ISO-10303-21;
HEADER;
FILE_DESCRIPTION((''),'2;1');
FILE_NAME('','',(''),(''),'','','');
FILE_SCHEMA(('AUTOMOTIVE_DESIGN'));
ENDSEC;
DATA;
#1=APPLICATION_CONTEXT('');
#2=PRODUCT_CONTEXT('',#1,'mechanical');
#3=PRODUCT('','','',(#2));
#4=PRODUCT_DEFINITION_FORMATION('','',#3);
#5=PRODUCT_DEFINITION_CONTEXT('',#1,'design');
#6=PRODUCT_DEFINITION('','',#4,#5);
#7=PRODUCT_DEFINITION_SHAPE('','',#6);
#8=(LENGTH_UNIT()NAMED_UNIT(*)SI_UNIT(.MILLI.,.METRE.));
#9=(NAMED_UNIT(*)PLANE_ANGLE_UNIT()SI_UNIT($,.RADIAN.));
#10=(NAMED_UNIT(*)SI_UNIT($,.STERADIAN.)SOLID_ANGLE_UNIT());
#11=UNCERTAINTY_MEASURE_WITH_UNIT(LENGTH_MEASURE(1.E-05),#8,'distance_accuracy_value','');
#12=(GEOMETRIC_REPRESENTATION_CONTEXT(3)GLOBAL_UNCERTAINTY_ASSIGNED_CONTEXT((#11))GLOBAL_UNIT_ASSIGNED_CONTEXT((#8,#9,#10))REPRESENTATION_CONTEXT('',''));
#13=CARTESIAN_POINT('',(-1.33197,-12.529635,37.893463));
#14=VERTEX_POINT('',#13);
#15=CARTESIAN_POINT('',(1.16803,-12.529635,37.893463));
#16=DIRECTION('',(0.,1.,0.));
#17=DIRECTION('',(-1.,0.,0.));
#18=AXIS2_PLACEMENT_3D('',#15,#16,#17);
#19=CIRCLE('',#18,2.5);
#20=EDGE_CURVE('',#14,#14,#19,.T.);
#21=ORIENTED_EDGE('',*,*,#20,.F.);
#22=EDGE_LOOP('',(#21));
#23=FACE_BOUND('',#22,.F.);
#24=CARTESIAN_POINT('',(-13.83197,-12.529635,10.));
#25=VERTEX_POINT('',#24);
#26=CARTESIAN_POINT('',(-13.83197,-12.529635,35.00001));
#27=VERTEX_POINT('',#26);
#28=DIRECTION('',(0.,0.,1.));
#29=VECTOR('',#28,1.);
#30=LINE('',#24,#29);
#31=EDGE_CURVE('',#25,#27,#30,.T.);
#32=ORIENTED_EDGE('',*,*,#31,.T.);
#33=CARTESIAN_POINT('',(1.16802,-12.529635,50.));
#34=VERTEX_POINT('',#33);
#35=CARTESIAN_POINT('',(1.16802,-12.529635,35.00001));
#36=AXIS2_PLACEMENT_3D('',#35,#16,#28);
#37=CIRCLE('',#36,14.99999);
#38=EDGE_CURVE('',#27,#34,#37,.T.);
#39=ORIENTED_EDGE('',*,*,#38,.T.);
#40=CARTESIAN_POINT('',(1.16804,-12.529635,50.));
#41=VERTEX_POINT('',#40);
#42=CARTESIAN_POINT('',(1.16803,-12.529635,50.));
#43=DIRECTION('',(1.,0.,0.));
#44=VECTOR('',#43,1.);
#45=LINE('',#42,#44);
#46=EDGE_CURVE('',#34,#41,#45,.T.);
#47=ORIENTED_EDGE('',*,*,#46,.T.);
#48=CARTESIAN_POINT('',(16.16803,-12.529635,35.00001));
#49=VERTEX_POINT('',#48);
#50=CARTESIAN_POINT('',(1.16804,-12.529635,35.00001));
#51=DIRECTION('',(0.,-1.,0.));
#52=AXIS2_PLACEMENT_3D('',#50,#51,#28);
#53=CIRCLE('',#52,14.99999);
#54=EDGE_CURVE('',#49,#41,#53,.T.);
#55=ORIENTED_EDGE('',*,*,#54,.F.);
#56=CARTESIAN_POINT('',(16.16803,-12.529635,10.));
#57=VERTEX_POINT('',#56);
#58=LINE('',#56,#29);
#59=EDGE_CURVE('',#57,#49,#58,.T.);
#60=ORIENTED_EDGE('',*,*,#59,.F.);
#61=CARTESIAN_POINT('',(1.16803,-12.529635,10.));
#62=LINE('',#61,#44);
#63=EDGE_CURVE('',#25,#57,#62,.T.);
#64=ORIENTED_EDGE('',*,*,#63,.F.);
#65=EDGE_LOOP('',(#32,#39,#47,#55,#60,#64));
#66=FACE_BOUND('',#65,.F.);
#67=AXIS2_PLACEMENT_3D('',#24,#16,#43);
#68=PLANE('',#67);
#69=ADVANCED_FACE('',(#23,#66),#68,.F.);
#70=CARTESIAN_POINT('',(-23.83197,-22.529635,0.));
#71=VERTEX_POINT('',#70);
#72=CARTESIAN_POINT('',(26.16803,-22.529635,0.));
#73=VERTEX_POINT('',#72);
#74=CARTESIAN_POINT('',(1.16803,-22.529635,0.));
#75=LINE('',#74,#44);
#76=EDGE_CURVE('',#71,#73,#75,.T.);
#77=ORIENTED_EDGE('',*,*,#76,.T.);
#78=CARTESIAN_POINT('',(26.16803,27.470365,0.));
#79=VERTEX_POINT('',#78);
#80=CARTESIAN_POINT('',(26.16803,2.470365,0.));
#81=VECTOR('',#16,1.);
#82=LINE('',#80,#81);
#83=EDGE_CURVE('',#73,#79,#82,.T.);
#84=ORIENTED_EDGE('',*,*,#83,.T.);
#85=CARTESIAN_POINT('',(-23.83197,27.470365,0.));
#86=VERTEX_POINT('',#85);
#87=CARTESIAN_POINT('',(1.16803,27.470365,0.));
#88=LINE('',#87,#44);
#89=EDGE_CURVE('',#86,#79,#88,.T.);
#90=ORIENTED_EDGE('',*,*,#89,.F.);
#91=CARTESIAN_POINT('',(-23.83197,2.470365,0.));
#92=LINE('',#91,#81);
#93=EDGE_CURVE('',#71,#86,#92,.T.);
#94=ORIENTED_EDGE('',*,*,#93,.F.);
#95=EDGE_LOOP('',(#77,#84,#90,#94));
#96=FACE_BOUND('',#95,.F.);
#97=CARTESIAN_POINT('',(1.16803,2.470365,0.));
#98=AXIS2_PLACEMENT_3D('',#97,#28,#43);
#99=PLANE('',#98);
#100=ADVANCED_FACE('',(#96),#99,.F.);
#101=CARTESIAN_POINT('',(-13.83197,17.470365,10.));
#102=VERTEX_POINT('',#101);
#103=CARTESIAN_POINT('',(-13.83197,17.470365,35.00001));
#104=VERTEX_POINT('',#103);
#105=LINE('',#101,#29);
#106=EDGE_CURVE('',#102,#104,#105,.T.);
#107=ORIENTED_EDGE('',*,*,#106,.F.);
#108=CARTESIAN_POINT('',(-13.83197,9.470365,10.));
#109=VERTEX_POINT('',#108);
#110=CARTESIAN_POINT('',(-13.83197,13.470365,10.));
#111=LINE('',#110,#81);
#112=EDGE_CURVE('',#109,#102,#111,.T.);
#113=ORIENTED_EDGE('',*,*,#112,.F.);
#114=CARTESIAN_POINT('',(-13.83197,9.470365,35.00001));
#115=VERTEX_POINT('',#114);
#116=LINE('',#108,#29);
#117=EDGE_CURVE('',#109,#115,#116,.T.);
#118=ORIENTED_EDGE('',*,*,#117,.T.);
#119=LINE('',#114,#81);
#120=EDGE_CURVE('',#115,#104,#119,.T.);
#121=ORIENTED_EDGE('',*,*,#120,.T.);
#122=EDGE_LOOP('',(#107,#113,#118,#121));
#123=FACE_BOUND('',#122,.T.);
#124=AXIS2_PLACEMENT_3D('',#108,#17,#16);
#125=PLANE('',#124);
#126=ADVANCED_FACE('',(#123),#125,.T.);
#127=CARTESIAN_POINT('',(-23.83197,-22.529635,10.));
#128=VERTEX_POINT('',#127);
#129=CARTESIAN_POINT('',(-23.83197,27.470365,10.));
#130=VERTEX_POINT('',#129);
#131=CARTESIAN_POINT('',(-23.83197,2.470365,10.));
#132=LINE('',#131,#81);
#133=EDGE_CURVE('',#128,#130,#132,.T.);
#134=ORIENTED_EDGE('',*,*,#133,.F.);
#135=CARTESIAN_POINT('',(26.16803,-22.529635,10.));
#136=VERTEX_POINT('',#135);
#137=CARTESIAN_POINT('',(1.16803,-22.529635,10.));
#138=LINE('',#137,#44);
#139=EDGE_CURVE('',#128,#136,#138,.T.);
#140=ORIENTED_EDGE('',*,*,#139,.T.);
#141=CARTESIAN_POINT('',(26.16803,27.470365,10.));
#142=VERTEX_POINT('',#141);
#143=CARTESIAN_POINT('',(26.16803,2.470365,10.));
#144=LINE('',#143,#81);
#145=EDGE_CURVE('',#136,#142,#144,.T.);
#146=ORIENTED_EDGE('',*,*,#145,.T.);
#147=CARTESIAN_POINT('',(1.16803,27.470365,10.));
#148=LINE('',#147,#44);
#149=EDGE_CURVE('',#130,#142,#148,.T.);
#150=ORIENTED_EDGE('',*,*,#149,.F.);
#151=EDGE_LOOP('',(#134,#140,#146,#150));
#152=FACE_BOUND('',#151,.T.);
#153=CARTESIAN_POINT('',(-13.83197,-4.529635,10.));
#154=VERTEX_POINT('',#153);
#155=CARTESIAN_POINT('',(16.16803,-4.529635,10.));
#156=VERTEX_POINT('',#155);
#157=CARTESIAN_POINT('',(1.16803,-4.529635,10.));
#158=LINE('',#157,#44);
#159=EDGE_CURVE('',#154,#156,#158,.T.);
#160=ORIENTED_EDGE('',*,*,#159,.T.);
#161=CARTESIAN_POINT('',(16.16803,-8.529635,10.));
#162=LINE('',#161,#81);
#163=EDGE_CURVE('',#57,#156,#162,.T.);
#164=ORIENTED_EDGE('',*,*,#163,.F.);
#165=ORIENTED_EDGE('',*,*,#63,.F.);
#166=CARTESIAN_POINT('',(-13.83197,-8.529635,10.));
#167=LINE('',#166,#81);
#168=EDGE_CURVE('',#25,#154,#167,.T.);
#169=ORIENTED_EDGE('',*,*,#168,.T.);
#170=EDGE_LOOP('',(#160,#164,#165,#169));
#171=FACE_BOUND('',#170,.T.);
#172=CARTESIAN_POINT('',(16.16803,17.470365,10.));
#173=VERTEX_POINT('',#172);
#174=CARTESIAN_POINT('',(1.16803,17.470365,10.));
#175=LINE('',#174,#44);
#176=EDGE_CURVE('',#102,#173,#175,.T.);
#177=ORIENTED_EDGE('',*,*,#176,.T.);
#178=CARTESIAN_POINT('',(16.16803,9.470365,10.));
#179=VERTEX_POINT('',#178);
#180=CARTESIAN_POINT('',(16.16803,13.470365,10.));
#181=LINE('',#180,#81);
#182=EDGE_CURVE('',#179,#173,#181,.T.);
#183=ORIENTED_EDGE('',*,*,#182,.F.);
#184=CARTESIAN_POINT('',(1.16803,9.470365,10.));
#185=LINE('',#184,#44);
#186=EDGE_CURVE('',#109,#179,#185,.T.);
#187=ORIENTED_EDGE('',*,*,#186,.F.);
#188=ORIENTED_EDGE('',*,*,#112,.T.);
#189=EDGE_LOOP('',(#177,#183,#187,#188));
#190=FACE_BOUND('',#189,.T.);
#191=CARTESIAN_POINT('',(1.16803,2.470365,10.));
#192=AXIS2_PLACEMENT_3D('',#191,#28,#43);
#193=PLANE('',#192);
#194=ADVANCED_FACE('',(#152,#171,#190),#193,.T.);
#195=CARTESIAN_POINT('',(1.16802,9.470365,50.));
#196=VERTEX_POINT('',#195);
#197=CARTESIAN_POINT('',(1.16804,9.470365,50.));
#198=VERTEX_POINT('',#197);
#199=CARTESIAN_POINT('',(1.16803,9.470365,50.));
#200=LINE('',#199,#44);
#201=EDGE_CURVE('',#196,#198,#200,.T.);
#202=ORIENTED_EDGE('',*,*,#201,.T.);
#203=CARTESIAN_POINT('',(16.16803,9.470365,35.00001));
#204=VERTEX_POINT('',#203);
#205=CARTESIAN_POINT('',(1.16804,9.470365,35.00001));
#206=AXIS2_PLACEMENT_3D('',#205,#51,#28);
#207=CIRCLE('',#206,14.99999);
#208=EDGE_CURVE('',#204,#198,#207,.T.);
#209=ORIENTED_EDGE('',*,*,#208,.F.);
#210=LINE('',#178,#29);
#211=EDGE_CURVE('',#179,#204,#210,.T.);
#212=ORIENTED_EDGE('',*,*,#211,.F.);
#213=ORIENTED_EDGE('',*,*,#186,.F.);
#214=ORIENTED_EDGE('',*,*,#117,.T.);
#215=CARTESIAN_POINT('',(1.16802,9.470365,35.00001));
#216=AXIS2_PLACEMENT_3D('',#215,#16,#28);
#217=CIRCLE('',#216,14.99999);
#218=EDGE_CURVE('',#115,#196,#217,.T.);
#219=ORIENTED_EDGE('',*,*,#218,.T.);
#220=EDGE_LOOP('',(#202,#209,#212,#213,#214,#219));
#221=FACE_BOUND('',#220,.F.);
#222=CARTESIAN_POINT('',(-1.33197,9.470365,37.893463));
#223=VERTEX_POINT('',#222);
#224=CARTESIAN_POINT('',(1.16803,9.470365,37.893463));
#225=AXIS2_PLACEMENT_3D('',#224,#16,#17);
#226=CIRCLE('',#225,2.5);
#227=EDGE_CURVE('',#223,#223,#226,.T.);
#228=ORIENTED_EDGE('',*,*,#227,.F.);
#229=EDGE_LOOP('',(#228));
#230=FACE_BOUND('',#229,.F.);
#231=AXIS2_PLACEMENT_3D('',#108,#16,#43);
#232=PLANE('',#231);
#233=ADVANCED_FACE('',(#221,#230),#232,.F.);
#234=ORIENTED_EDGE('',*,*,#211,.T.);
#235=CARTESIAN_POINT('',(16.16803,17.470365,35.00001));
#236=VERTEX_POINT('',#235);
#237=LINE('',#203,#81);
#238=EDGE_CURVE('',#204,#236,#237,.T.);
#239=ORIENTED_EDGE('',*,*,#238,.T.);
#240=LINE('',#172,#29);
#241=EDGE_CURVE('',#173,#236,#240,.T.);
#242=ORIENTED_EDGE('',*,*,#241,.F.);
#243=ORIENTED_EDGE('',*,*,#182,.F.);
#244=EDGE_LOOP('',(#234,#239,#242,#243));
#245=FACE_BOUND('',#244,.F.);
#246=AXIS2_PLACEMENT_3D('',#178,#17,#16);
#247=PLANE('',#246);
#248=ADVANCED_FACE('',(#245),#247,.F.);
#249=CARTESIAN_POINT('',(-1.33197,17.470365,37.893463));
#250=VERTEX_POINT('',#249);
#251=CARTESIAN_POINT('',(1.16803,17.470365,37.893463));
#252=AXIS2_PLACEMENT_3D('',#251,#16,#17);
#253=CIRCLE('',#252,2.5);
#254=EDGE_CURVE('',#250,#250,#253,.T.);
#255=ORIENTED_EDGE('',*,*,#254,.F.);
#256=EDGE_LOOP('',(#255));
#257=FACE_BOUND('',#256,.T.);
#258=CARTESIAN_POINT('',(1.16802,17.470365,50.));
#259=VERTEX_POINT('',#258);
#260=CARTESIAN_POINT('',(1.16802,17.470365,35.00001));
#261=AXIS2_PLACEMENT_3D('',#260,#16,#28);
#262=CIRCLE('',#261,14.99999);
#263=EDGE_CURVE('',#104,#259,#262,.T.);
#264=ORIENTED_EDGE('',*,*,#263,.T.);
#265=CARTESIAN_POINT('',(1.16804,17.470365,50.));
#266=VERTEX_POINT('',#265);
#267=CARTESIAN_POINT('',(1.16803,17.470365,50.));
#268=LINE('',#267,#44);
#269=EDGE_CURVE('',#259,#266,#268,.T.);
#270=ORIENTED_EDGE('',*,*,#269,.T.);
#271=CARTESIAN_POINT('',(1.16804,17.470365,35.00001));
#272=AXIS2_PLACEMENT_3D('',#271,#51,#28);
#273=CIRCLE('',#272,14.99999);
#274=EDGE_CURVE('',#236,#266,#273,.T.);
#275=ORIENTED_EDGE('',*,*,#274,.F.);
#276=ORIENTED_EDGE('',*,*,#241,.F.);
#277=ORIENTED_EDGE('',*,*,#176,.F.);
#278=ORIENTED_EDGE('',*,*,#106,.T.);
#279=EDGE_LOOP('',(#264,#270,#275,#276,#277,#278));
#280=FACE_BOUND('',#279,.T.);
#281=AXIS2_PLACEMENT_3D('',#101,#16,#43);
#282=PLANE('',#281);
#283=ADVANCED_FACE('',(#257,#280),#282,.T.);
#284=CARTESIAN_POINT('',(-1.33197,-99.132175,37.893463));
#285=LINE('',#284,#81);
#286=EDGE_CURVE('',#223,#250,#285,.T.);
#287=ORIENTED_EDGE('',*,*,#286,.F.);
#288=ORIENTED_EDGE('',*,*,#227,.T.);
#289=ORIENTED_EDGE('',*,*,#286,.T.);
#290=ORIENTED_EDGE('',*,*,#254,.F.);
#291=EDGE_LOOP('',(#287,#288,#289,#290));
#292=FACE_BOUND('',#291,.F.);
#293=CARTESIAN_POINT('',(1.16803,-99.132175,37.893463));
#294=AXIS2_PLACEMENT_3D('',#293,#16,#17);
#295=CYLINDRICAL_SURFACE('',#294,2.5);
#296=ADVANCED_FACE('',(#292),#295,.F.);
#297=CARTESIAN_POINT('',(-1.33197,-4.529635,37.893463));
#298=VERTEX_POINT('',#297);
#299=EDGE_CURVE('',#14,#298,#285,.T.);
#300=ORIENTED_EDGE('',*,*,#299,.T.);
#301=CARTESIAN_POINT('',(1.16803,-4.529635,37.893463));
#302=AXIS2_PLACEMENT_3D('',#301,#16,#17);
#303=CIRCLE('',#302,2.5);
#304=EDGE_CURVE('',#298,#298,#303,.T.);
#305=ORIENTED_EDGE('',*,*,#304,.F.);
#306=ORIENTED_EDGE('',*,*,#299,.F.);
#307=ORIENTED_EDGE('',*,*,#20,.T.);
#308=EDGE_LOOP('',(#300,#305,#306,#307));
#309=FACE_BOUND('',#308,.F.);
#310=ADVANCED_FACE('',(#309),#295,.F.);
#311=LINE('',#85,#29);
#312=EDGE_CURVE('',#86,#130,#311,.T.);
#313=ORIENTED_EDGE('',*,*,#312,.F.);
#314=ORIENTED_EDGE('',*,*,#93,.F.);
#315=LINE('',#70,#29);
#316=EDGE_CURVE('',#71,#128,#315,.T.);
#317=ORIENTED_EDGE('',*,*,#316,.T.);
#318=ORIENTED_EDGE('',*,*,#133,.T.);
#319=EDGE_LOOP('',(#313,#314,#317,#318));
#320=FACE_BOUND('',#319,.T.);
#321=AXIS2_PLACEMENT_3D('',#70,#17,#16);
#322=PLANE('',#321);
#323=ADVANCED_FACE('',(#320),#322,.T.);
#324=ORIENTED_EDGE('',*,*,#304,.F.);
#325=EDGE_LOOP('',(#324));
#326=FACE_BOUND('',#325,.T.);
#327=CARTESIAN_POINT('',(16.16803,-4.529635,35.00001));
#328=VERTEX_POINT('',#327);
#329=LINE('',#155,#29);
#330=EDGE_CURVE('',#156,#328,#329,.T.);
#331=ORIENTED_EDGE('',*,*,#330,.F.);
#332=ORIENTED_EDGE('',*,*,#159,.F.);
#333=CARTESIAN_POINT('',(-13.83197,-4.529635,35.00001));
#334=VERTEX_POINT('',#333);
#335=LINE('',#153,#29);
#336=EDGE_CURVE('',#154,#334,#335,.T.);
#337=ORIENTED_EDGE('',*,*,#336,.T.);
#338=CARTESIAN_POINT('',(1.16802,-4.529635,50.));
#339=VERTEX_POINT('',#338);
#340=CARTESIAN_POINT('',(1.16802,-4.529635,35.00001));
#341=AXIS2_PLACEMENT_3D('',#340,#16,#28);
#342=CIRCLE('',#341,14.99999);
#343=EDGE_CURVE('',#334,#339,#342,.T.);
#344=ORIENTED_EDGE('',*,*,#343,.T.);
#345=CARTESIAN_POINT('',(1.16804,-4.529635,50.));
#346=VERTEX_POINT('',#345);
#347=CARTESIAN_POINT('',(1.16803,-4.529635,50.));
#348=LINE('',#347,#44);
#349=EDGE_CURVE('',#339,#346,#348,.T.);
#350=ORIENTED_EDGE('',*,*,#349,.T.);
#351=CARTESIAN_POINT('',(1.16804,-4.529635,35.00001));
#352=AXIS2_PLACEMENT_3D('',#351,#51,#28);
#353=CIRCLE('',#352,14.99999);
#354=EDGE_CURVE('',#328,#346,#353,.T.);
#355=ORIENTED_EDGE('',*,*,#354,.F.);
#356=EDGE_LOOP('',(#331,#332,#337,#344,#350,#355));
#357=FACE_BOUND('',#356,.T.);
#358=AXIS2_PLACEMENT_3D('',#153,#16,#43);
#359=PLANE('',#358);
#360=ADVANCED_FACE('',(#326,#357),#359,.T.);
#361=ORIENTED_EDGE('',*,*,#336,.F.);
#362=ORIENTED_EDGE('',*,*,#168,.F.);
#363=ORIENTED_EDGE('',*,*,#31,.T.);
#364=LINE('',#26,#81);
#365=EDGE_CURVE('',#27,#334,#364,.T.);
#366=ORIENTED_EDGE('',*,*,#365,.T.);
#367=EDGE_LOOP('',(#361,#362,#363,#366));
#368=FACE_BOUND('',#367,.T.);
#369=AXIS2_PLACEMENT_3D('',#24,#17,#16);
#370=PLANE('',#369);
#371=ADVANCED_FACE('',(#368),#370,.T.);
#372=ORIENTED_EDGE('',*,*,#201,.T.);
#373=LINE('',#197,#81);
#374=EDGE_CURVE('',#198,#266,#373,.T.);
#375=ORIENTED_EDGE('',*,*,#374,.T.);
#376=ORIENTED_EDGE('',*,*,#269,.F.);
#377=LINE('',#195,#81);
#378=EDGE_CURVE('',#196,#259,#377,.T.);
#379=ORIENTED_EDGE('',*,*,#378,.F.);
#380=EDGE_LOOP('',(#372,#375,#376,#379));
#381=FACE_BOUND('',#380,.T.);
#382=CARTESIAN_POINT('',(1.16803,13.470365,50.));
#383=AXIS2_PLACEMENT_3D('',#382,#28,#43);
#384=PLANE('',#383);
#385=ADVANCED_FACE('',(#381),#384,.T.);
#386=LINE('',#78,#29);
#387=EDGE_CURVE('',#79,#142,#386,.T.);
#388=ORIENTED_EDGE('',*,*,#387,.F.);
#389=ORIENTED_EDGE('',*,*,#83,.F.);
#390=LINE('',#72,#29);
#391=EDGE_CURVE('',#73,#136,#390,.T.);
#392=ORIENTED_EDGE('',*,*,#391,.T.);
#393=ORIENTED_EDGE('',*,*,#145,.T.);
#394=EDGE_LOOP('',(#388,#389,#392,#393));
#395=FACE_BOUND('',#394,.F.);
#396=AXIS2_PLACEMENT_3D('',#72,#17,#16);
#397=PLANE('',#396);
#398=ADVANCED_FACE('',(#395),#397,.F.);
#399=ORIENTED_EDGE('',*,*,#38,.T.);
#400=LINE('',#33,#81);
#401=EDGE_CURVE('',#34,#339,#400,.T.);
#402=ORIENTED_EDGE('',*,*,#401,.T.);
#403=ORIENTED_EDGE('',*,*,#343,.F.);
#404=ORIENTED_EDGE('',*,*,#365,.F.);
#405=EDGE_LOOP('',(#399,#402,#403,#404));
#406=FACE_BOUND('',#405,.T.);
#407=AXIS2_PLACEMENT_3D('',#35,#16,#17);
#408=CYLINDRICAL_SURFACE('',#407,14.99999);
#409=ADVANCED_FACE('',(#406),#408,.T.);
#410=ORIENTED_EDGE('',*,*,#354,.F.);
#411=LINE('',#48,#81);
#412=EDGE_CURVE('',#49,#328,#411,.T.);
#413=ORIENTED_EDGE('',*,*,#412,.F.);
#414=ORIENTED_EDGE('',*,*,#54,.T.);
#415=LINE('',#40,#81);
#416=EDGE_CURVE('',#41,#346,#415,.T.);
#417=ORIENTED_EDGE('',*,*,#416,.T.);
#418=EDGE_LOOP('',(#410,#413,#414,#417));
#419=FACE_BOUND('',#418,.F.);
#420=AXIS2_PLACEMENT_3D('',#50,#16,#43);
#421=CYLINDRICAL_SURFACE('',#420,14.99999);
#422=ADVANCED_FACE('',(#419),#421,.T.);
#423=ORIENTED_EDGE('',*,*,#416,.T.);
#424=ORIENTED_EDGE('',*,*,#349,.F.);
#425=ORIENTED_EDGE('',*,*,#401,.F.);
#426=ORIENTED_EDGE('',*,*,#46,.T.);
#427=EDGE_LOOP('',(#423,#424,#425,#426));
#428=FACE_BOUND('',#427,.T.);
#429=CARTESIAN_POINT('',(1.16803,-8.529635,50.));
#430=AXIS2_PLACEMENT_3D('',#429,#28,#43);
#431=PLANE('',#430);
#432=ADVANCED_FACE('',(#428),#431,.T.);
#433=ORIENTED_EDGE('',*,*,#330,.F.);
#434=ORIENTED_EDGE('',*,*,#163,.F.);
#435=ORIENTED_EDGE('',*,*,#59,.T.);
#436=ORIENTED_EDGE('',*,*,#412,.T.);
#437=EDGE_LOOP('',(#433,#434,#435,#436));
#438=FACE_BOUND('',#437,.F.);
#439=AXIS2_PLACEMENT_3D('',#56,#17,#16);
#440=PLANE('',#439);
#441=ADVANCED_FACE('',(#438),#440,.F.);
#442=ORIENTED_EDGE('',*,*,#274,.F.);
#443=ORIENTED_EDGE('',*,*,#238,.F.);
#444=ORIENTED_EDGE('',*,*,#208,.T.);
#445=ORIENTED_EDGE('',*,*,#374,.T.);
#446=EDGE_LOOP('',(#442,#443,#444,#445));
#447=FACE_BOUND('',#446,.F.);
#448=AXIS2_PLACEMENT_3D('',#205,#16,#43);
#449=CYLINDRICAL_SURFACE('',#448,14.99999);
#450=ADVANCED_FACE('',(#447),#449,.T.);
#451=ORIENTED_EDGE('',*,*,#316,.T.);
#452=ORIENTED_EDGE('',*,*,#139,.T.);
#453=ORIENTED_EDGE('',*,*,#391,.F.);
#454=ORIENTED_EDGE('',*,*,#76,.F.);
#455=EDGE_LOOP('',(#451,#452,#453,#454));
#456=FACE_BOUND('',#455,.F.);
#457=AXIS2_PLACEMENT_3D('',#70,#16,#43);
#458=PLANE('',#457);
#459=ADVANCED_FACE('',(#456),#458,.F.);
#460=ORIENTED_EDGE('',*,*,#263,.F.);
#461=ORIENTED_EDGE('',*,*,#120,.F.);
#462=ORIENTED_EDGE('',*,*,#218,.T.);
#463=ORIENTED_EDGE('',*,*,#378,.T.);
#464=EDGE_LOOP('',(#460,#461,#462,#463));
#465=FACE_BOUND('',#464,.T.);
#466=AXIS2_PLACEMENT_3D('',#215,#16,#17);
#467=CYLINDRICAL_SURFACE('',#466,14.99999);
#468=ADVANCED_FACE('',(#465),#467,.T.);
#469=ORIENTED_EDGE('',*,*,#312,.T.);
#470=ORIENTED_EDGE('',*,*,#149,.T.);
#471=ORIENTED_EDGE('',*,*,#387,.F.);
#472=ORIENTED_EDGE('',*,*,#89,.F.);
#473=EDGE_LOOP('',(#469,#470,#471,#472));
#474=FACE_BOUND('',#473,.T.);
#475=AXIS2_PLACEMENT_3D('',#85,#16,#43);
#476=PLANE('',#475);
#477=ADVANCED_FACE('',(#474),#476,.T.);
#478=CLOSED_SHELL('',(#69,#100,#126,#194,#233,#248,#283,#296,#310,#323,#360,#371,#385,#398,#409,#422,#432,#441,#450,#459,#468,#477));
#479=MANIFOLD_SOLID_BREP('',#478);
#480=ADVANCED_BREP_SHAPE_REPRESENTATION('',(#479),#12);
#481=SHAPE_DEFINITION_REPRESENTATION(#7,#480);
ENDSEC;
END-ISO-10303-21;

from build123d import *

# Parameters (mm, degrees)
F0_W     = 50
F0_H     = 50
F1_DEPTH = 10
F2_W     = 30
F2_H     = 8
F3_DEPTH = 40
F4_W     = 30
F4_H     = 8
F5_DEPTH = 40
F6_R     = 14.99999
F7_R     = 14.99999
F9_D     = 5


# Not quite as in the source:
# - a fillet or chamfer is up to 0.001 mm smaller than in the source, because OpenCascade refuses the exact size


with BuildPart() as f1:
    # F0 (on Top) → F1 (new body)
    with BuildSketch(Plane.XY):
        with Locations((1.1680303141, 2.4703653681)):
            Rectangle(F0_W, F0_H)
    extrude(amount=F1_DEPTH)

    # F2 (on face) → F3 (join)
    with BuildSketch(Plane.XY.offset(10)):
        with Locations((1.1680303141, -8.5296346319)):
            Rectangle(F2_W, F2_H)
    extrude(amount=F3_DEPTH)

    # F4 (on face) → F5 (join)
    with BuildSketch(Plane.XY.offset(10)):
        with Locations((1.1680303141, 13.4703653681)):
            Rectangle(F4_W, F4_H)
    extrude(amount=F5_DEPTH)

    # F6 (radius 15 in the source; OpenCascade refuses exactly that, so slightly less here)
    f6_edges = [f1.edges().sort_by_distance(p)[0] for p in [
        (-13.83197, -8.529635, 50),
        (16.16803, -8.529635, 50),
    ]]
    fillet(f6_edges, radius=F6_R)

    # F7 (radius 15 in the source; OpenCascade refuses exactly that, so slightly less here)
    f7_edges = [f1.edges().sort_by_distance(p)[0] for p in [
        (16.16803, 13.470365, 50),
        (-13.83197, 13.470365, 50),
    ]]
    fillet(f7_edges, radius=F7_R)

    # F9 (through all)
    with Locations(Plane.XZ.offset(12.5296346319)):
        with Locations((1.1680303141, 37.8934629261)):
            Hole(F9_D / 2)


solid = f1.part
